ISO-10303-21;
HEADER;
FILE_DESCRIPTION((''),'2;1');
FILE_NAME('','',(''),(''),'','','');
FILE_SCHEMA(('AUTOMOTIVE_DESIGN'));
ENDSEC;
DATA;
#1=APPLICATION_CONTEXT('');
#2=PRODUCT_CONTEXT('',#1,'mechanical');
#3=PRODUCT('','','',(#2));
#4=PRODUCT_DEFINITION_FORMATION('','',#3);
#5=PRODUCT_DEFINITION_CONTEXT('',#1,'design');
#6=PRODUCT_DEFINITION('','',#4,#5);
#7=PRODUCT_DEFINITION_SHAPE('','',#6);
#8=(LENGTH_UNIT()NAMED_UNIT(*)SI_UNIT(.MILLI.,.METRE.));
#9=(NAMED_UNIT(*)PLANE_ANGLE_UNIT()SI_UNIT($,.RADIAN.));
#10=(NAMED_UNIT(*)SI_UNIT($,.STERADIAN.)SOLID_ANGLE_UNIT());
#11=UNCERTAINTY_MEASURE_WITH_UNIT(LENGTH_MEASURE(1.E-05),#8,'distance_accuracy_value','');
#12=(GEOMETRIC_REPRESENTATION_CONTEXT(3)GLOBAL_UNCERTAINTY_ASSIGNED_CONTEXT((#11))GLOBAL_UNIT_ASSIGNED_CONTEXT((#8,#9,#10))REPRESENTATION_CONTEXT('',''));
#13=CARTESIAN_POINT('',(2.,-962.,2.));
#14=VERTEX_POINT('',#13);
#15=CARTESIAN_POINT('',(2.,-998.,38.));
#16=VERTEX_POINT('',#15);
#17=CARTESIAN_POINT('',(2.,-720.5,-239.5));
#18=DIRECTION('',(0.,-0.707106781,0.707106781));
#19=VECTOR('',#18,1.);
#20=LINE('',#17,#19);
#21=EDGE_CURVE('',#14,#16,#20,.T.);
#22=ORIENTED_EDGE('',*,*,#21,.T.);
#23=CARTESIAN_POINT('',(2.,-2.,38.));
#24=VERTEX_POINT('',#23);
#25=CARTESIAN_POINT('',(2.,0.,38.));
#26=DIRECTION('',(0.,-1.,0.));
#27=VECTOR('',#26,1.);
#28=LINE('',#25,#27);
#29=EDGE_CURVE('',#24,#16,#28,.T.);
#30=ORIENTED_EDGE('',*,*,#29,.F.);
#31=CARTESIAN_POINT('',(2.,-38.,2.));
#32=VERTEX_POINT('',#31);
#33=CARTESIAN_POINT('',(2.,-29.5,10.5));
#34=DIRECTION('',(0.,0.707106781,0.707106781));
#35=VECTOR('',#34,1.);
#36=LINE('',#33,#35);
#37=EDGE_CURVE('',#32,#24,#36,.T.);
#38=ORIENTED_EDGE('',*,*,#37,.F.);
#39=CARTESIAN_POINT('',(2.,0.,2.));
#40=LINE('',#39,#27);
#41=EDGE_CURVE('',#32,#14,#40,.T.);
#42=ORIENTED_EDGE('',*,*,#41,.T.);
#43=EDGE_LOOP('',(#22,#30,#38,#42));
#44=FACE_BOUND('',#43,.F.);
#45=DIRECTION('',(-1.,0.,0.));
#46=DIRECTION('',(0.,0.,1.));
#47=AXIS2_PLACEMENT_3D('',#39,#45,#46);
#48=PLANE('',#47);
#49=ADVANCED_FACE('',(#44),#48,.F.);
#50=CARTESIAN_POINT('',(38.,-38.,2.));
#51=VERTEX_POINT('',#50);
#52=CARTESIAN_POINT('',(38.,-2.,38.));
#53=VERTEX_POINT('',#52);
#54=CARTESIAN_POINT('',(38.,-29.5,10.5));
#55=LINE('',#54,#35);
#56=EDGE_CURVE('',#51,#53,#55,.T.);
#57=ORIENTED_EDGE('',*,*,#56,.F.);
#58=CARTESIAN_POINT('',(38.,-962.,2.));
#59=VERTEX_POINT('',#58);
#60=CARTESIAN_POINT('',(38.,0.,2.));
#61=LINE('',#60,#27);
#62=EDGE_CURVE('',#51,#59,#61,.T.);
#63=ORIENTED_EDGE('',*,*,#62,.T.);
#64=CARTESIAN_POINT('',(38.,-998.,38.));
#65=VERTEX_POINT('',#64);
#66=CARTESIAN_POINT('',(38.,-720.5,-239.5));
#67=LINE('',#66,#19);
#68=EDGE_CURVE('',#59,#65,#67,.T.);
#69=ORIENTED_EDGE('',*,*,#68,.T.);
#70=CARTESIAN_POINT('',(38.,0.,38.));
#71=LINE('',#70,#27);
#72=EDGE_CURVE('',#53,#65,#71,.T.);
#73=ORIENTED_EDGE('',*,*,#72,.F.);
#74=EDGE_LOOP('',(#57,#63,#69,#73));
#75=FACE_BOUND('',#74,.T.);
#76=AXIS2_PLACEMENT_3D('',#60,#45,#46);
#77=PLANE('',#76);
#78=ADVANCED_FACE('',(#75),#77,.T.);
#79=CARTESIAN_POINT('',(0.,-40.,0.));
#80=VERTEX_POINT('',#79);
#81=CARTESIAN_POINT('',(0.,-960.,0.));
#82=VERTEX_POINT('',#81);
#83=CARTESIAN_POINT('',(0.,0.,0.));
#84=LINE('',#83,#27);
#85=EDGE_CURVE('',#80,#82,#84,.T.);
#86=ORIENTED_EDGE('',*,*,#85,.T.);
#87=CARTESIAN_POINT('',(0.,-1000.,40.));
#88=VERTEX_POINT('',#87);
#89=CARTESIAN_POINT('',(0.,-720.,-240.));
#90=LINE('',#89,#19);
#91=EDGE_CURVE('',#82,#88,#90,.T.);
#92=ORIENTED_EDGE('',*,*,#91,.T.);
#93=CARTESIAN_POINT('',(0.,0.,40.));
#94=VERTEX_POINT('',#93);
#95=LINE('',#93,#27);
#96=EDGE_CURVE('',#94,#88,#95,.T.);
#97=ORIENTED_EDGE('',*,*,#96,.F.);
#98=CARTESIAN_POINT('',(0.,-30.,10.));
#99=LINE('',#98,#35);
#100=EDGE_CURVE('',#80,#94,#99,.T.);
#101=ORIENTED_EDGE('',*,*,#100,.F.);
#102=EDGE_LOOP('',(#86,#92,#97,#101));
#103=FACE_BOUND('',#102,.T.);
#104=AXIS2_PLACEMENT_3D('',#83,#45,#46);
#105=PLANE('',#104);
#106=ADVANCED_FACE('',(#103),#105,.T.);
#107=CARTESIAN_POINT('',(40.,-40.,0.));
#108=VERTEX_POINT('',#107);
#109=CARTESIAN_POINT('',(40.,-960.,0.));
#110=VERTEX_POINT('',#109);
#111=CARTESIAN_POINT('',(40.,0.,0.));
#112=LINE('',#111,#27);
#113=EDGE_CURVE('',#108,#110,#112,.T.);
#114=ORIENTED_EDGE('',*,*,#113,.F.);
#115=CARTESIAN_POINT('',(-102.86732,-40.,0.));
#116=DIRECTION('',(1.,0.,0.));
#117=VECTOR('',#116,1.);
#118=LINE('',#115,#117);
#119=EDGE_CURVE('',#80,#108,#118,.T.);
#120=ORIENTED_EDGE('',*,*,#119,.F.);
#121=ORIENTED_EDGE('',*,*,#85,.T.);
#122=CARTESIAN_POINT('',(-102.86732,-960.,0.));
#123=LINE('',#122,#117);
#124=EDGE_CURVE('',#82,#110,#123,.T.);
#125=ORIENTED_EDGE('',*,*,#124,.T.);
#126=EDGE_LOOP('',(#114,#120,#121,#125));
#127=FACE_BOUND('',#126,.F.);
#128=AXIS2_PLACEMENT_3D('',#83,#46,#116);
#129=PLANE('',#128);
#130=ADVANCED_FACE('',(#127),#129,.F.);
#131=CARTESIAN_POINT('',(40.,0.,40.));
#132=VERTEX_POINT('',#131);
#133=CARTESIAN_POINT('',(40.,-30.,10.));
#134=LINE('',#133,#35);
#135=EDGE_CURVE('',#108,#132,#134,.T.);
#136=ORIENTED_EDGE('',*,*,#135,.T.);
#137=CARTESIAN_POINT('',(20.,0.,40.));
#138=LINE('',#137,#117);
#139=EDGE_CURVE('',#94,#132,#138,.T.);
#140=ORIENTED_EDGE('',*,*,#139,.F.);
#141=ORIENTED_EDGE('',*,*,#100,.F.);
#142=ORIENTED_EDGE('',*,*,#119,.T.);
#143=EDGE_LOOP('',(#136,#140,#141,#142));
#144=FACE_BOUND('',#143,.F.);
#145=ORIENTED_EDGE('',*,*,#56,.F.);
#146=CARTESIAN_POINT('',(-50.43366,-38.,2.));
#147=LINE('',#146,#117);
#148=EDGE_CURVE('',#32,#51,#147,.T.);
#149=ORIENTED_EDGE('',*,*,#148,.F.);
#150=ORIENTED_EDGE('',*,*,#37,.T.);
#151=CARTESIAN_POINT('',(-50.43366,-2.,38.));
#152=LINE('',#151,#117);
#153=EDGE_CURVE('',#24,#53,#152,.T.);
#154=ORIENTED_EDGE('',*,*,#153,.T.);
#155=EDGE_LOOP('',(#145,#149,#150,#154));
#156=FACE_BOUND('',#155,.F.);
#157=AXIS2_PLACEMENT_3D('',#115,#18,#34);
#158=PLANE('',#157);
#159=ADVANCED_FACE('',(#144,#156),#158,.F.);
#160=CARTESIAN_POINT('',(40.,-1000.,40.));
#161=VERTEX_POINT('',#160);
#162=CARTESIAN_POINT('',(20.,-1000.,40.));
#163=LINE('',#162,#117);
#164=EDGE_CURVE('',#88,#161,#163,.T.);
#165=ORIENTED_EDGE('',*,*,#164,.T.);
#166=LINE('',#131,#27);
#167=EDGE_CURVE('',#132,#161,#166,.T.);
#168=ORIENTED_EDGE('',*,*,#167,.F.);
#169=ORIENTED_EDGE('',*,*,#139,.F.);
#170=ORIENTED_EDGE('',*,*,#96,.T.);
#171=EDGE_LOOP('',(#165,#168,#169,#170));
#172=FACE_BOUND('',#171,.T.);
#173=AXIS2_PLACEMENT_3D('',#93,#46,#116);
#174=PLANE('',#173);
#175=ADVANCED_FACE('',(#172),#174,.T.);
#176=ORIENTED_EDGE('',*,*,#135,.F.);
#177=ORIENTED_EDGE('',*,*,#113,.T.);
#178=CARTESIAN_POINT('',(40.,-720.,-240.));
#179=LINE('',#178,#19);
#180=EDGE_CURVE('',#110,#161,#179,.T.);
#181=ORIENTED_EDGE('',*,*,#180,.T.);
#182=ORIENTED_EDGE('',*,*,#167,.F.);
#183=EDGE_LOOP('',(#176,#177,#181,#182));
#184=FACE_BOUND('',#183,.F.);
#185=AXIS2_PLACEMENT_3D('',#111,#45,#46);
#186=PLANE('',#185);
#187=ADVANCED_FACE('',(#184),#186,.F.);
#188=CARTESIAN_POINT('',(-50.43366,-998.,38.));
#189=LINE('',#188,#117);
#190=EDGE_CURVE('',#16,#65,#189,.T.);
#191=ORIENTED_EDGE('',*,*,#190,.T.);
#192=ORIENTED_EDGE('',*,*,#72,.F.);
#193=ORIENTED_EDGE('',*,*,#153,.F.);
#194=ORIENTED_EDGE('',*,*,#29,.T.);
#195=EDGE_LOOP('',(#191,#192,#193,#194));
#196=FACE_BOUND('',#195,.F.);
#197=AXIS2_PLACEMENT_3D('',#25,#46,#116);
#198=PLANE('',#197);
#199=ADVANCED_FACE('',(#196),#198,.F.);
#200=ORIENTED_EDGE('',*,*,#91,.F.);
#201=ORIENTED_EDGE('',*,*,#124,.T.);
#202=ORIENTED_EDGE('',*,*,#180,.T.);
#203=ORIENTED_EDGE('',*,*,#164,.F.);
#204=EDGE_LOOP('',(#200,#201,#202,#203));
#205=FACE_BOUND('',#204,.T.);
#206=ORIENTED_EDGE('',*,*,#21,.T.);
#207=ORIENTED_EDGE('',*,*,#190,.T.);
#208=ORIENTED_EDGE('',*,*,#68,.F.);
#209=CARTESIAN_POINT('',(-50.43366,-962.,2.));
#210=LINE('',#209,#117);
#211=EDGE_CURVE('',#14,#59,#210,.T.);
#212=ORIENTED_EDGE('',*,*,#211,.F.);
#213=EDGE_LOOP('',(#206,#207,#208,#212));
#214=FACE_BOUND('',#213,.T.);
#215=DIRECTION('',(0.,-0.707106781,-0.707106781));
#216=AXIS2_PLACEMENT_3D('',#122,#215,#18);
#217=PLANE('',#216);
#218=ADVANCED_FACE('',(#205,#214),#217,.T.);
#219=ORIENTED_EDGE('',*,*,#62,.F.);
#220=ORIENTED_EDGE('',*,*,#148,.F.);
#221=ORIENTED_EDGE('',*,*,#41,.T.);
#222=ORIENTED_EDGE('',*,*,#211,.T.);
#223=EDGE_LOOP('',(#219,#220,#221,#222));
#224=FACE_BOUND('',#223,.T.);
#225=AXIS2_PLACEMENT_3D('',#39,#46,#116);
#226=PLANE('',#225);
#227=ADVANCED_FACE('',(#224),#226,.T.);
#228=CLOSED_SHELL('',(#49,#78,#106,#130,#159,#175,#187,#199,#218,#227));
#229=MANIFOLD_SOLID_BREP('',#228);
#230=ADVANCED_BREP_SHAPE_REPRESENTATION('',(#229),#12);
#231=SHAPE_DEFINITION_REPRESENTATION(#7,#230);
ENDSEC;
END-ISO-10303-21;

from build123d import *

# Parameters (mm, degrees)
F0_W        = 40
F0_H        = 40
F0_W_2      = 36
F0_H_2      = 36
F1_DEPTH    = 1000
F2_T1_DEPTH = 245.7346390373


# Not quite as in the source:
# - a fillet or chamfer that OpenCascade refuses, or shapes differently, is made with other operations: its cross-section is extruded or revolved along the edge and cut away or added


with BuildPart() as f1:
    # F0 (on Front) → F1 (new body)
    with BuildSketch(Plane.XZ):
        with Locations((20, 20)):
            Rectangle(F0_W, F0_H)
        with Locations((20, 20)):
            Rectangle(F0_W_2, F0_H_2, mode=Mode.SUBTRACT)
    extrude(amount=F1_DEPTH)

    # F2: chamfer of 40 on 2 edges, made by hand

    # F2_s2 → F2_t1 (cut)
    with BuildSketch(Plane.YZ.offset(-102.8673195186)):
        Polygon((-960, 0), (-1000, 40), (-1000, 0), align=None)
        Polygon((-40, 0), (0, 40), (0, 0), align=None)
    extrude(amount=F2_T1_DEPTH, mode=Mode.SUBTRACT)


solid = f1.part
